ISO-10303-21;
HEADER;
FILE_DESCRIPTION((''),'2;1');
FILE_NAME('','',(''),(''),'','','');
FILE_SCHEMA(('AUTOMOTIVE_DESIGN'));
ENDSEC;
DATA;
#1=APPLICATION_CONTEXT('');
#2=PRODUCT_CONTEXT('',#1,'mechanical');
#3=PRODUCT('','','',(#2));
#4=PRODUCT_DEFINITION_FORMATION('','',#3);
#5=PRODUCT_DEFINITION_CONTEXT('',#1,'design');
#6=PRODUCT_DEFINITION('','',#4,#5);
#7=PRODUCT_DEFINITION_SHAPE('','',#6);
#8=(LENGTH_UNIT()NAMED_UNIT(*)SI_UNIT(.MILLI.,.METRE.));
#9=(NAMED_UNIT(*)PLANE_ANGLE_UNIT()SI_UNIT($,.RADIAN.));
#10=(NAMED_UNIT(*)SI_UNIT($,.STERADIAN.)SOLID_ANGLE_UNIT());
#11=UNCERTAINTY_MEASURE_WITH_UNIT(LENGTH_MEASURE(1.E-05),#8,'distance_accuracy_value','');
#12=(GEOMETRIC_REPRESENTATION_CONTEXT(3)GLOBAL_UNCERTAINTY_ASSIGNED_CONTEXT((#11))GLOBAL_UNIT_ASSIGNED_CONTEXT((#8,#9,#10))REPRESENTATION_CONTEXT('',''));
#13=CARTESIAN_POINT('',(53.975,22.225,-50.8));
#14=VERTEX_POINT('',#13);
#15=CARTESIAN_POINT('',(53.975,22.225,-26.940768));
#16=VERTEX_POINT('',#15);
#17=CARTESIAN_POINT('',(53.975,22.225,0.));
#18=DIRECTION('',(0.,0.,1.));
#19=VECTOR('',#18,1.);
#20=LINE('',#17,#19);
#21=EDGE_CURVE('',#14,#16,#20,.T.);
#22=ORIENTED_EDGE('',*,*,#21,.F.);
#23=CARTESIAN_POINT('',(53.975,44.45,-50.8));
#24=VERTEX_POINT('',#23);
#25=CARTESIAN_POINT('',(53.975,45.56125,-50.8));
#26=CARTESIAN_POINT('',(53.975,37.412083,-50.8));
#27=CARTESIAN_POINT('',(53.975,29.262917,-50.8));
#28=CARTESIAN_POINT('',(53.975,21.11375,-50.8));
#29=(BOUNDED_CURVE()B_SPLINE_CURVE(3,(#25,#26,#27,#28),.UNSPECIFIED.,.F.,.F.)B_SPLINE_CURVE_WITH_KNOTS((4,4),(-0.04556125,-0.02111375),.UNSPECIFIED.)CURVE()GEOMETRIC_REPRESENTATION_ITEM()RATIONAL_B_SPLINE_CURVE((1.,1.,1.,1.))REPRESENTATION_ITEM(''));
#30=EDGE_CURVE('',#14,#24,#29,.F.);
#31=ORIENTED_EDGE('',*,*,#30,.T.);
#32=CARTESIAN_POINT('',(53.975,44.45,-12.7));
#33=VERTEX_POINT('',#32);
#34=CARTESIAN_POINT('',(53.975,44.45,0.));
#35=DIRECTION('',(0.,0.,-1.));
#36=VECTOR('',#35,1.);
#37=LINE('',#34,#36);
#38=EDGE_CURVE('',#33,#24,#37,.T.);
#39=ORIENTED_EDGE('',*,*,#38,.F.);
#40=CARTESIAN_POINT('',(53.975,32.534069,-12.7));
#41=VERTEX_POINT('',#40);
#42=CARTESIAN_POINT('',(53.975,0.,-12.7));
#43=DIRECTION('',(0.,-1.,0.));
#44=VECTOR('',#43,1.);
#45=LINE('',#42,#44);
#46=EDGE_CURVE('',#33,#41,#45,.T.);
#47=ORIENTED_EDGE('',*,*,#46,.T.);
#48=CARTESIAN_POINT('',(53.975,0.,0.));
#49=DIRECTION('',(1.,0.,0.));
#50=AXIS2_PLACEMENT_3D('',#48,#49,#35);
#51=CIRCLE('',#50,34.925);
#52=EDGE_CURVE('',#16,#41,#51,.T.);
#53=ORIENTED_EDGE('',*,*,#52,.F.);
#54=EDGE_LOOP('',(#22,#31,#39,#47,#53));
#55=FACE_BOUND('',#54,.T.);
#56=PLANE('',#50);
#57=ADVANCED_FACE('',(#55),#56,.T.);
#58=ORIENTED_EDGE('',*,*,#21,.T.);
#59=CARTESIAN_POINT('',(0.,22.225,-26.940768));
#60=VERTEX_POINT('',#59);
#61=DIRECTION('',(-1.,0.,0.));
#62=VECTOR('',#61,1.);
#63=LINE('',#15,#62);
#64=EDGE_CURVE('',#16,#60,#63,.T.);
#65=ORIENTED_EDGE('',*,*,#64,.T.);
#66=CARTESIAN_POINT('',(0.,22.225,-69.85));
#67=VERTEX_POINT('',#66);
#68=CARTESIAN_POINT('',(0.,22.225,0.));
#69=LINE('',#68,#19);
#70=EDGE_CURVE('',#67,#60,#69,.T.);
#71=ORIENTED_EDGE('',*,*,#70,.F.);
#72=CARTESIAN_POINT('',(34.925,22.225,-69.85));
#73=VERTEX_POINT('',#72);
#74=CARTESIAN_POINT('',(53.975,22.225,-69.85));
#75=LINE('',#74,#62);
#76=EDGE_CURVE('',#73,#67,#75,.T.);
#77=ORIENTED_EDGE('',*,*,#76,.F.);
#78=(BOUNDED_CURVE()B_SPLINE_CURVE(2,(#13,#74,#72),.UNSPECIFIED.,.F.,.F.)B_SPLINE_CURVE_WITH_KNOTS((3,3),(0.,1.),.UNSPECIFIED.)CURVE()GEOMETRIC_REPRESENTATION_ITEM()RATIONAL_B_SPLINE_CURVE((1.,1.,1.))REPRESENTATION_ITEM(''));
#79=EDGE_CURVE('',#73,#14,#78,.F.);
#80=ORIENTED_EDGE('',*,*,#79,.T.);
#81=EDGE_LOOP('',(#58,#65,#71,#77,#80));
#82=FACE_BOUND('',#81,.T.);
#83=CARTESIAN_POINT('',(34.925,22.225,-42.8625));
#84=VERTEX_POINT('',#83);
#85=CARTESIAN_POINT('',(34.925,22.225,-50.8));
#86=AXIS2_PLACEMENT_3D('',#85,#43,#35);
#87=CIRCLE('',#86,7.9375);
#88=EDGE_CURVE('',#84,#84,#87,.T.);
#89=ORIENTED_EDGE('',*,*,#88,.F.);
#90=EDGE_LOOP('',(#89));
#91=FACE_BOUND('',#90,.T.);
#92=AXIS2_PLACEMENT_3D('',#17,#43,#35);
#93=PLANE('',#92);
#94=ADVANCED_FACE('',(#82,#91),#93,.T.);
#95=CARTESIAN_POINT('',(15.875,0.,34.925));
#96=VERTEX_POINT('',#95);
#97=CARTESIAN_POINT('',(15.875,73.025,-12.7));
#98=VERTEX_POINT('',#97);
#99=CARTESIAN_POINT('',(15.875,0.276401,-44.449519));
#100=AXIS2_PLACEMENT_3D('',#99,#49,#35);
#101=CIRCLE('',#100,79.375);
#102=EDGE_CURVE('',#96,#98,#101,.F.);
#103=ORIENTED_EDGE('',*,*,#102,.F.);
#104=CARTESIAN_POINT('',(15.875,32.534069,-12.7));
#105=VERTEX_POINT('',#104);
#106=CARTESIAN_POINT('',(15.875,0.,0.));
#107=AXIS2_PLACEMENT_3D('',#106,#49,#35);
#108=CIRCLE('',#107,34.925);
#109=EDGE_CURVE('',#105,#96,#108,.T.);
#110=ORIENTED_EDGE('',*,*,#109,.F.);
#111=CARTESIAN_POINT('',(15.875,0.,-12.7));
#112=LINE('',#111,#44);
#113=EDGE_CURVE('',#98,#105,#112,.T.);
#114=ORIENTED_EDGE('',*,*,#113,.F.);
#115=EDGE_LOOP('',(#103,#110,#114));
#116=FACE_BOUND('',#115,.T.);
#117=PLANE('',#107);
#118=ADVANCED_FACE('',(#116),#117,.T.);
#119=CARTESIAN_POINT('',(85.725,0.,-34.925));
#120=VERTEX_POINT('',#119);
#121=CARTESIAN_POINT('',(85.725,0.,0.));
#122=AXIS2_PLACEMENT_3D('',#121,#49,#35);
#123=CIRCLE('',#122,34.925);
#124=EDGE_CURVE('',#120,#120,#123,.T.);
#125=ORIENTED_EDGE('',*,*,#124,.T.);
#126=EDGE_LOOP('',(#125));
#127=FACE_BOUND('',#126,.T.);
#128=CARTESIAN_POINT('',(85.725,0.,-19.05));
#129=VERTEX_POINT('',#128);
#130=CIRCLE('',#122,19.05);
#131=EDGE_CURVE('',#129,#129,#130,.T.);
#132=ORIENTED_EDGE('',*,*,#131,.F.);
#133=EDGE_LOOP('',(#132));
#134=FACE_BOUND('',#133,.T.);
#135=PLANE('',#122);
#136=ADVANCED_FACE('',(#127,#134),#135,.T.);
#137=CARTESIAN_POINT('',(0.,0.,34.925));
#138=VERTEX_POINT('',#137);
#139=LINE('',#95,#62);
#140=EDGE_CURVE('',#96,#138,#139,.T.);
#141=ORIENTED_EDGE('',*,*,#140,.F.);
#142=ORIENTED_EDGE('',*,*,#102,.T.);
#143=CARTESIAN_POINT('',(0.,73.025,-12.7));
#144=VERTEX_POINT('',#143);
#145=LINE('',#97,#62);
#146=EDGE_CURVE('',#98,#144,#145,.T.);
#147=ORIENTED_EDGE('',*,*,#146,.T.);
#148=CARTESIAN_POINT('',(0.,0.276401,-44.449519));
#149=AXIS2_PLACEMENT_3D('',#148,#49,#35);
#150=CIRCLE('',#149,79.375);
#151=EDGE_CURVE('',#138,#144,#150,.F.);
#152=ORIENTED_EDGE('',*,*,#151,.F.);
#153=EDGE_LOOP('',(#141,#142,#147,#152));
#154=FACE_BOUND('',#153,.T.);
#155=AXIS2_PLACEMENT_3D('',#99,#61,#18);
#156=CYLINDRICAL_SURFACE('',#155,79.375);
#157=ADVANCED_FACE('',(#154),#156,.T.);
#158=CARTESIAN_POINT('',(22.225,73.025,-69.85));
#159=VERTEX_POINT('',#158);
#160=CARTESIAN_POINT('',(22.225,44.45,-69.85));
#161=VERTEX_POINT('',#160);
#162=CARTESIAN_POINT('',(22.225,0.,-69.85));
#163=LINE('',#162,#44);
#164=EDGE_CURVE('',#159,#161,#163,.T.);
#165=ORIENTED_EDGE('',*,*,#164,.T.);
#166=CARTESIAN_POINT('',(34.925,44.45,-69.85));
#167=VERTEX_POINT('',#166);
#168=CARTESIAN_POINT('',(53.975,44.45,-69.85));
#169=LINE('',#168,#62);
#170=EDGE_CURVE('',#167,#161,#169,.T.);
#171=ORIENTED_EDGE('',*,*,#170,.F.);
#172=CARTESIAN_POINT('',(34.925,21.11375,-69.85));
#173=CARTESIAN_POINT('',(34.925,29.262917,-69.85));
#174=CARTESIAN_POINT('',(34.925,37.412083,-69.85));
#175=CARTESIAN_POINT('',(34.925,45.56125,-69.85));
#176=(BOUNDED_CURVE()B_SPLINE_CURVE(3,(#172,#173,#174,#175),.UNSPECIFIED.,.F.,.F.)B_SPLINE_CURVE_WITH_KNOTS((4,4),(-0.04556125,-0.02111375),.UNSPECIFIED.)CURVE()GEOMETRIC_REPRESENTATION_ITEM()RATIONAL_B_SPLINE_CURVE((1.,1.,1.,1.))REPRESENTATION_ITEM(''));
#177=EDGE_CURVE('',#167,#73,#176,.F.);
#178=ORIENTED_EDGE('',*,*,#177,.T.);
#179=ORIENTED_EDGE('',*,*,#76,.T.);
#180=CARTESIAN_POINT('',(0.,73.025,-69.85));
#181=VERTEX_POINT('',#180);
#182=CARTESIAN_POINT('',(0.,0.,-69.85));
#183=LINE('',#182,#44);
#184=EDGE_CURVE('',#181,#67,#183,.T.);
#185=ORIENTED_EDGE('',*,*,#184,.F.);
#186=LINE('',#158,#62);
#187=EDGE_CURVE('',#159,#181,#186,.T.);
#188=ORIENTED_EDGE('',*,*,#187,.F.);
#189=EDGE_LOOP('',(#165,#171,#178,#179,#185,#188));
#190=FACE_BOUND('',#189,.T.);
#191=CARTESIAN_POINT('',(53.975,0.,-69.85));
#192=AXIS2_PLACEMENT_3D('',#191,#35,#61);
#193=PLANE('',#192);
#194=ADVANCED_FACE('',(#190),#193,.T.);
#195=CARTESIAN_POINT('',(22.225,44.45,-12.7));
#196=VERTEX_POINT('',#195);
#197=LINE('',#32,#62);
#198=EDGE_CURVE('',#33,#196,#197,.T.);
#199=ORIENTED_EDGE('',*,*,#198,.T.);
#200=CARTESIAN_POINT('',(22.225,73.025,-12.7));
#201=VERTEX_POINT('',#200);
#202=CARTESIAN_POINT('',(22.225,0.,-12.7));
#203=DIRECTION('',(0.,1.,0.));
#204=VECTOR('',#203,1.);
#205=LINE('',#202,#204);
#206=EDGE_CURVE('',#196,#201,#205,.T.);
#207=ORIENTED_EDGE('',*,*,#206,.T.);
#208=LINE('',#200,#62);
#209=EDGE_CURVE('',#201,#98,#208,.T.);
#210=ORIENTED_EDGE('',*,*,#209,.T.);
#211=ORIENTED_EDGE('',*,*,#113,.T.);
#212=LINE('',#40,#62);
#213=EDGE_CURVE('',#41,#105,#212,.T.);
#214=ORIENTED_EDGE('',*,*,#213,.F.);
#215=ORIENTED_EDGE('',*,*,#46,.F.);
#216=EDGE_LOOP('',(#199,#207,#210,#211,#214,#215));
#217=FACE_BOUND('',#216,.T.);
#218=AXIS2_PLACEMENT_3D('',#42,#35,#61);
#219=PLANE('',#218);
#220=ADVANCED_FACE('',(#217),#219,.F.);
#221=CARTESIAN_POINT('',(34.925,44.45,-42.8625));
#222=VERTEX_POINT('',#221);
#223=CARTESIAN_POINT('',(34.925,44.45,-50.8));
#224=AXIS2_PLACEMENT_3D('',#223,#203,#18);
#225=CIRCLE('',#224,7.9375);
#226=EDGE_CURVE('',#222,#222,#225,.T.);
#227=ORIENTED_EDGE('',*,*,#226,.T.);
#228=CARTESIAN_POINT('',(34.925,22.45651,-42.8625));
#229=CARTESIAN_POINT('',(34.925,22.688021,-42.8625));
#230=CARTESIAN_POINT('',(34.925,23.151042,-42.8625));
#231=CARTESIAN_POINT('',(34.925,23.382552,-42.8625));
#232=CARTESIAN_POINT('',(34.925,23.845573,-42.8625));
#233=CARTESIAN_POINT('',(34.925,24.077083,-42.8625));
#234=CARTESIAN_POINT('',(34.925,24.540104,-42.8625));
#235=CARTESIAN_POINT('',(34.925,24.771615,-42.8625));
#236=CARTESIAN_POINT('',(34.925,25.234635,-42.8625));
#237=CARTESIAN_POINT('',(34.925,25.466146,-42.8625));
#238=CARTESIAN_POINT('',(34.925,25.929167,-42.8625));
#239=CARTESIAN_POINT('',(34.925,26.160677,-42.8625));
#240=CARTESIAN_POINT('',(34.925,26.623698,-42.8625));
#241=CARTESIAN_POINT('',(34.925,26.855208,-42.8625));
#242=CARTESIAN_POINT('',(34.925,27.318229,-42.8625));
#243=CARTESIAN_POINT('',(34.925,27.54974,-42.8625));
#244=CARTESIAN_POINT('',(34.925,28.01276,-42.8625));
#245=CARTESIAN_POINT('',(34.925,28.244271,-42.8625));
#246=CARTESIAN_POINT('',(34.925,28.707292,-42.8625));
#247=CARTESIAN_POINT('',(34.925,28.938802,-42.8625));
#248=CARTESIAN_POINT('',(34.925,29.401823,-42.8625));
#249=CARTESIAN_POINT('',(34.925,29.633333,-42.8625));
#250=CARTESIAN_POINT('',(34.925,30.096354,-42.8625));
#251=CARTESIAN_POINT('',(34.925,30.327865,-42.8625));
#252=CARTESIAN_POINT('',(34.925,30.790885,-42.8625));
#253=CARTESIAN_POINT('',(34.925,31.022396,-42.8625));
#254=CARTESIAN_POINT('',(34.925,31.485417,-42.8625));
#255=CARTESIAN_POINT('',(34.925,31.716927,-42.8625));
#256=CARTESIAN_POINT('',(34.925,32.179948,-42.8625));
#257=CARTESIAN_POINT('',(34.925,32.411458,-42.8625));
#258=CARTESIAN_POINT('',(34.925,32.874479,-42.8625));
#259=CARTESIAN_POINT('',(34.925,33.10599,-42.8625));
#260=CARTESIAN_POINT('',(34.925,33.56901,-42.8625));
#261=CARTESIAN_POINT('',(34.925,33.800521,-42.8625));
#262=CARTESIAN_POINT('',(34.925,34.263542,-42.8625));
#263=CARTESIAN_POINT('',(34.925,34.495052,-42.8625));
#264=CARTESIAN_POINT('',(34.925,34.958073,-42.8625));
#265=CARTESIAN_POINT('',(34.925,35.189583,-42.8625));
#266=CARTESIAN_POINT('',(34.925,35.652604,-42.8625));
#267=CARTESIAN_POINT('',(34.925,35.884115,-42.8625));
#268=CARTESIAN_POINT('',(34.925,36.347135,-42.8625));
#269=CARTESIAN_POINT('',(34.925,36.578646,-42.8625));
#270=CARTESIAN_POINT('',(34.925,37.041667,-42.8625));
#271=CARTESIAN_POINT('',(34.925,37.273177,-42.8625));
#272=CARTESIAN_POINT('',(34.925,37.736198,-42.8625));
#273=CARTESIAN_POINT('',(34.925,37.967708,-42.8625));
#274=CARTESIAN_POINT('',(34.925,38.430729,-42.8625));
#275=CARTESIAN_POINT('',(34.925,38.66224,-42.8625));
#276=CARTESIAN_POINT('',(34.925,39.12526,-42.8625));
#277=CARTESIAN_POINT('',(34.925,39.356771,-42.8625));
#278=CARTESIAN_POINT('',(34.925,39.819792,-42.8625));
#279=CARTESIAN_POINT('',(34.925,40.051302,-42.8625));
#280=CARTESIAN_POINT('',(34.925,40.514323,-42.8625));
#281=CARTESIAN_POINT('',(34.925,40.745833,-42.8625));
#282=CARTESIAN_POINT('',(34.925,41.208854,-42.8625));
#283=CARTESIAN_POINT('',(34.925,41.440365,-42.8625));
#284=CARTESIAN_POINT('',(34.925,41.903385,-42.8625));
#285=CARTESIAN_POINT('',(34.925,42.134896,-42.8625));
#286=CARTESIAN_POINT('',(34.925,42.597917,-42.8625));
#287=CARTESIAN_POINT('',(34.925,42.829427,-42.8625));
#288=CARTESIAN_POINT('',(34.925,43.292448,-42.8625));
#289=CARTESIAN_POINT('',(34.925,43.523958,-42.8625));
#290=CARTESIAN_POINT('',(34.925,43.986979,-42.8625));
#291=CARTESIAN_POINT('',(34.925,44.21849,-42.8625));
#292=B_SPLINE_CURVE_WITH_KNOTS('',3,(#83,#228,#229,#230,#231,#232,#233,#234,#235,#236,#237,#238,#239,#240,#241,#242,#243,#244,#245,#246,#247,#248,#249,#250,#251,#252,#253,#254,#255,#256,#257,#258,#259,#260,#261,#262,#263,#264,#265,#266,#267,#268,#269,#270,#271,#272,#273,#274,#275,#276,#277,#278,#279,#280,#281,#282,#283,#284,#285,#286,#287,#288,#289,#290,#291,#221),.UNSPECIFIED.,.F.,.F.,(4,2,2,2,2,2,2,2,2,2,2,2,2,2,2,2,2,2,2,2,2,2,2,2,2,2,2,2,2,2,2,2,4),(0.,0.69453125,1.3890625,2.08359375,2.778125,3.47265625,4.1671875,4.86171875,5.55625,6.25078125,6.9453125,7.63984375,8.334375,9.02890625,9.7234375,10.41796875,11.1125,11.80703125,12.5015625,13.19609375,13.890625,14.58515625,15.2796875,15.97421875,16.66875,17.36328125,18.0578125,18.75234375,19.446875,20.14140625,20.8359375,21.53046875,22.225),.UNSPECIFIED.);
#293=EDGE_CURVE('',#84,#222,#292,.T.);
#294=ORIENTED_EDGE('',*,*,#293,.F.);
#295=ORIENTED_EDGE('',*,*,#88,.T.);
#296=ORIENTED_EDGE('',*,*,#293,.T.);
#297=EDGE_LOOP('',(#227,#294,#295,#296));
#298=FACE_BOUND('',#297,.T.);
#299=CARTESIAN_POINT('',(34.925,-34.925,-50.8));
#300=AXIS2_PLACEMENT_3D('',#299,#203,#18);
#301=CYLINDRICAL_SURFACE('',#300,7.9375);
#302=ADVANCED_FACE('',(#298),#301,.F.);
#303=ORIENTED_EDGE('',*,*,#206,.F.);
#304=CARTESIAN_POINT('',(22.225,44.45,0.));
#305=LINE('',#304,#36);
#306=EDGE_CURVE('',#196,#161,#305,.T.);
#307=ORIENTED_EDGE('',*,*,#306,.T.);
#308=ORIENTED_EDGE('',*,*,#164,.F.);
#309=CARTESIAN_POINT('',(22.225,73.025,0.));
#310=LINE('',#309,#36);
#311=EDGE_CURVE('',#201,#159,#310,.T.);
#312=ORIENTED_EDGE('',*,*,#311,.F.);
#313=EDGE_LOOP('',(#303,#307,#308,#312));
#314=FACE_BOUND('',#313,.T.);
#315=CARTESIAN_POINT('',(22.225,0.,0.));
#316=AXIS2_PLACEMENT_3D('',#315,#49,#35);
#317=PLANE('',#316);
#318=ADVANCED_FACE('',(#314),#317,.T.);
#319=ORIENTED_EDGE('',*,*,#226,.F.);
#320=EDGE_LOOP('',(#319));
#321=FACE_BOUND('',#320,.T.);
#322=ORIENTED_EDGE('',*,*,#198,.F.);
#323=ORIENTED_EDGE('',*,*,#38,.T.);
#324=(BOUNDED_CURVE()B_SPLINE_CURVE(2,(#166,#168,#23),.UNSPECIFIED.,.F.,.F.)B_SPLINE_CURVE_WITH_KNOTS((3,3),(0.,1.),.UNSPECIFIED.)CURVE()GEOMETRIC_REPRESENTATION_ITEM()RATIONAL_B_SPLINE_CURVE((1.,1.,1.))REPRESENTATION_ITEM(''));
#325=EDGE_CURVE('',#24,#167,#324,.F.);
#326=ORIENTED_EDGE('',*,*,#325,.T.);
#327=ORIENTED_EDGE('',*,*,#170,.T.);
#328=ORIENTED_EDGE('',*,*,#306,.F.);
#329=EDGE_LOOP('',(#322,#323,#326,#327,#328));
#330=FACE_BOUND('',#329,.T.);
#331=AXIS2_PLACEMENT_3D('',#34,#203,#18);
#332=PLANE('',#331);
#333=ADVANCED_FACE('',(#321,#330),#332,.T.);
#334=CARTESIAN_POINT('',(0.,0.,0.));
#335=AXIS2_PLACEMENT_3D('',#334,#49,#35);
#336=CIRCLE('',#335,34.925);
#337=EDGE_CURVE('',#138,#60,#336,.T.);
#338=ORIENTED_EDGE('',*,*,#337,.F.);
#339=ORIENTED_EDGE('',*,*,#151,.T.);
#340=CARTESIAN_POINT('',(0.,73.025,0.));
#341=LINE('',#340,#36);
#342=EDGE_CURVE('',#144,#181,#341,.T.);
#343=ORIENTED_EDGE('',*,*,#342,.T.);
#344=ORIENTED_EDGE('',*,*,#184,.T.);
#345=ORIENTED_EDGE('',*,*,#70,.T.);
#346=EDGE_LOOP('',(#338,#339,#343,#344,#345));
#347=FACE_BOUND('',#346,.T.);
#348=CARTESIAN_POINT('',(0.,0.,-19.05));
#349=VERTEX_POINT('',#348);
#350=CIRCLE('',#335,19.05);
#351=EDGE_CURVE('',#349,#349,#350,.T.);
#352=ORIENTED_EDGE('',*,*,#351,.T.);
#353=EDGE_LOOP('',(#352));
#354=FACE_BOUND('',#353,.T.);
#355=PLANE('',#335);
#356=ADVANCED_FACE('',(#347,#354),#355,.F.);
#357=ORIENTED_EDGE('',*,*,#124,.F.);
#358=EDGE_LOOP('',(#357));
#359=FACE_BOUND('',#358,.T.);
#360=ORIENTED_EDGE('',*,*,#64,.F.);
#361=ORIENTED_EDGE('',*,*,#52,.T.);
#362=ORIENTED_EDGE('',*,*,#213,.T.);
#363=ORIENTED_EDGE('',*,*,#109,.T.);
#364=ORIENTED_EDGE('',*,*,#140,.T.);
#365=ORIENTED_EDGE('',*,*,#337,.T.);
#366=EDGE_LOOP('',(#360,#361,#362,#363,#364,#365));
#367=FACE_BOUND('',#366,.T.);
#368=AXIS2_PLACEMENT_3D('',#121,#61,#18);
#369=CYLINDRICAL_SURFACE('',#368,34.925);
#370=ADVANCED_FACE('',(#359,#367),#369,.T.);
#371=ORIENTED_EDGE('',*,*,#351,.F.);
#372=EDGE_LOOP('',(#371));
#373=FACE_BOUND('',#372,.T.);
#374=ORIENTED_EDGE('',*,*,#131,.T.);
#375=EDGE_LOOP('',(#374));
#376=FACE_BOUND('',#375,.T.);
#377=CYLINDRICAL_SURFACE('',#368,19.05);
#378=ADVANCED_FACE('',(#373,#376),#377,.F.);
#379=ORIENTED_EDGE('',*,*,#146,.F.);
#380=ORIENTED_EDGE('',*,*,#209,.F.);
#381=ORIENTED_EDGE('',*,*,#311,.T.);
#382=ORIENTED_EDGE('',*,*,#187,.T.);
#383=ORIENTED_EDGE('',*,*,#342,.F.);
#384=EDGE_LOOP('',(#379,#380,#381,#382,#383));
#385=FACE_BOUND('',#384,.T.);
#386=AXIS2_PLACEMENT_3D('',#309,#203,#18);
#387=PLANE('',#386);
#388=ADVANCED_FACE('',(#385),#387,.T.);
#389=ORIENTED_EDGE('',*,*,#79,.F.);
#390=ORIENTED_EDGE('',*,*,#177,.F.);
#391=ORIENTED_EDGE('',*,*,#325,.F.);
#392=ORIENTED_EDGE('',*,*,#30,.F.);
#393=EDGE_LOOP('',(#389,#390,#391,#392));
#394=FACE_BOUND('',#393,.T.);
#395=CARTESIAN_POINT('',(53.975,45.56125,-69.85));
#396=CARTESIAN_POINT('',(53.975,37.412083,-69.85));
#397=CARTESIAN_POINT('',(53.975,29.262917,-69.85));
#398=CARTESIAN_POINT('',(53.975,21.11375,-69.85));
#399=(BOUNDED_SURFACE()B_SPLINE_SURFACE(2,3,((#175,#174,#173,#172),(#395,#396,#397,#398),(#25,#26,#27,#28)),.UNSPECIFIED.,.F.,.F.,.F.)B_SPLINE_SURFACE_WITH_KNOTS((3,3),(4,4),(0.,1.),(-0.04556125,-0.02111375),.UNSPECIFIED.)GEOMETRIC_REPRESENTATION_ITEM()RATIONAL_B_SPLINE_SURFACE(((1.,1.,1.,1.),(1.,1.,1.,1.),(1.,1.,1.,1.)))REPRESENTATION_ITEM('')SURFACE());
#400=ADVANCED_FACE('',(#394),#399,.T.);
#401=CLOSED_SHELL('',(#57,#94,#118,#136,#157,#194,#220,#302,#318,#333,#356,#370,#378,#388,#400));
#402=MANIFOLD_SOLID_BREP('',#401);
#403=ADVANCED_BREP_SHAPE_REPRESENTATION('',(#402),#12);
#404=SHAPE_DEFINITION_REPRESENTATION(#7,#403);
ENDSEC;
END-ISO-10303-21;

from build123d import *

# Parameters (mm, degrees)
SKETCH1_R           = 34.925
SKETCH1_R_2         = 19.05
BOSS_EXTRUDE1_DEPTH = 85.725
BOSS_EXTRUDE2_DEPTH = 53.975
SKETCH1_4_W         = 57.15
SKETCH1_4_H         = 28.575
BOSS_EXTRUDE3_DEPTH = 22.225
BOSS_EXTRUDE4_DEPTH = 15.875
FILLET1_SIZE        = 19.05
SKETCH2_R           = 7.9375
CUT_EXTRUDE1_DEPTH  = 137.118289601


with BuildPart() as part:
    # Sketch1 → Boss-Extrude1 (new body)
    with BuildSketch(Plane(origin=(0, 0, 0), x_dir=(0, 0, -1), z_dir=(1, 0, 0))):
        Circle(SKETCH1_R)
        Circle(SKETCH1_R_2, mode=Mode.SUBTRACT)
    extrude(amount=BOSS_EXTRUDE1_DEPTH)

    # Sketch1<3> → Boss-Extrude2 (add)
    with BuildSketch(Plane(origin=(0, 0, 0), x_dir=(0, 0, -1), z_dir=(1, 0, 0))):
        with BuildLine():
            Line((69.85, 44.45), (12.7, 44.45))
            Line((12.7, 44.45), (12.7, 32.534068682))
            ThreePointArc((12.7, 32.534068682), (20.479669269, 28.290259306), (26.940768363, 22.225))
            Line((26.940768363, 22.225), (69.85, 22.225))
            Line((69.85, 22.225), (69.85, 44.45))
        make_face()
    extrude(amount=BOSS_EXTRUDE2_DEPTH)

    # Sketch1<4> → Boss-Extrude3 (add)
    with BuildSketch(Plane(origin=(0, 0, 0), x_dir=(0, 0, -1), z_dir=(1, 0, 0))):
        with Locations((41.275, 58.7375)):
            Rectangle(SKETCH1_4_W, SKETCH1_4_H)
    extrude(amount=BOSS_EXTRUDE3_DEPTH)

    # Sketch1<5> → Boss-Extrude4 (add)
    with BuildSketch(Plane(origin=(0, 0, 0), x_dir=(0, 0, -1), z_dir=(1, 0, 0))):
        with BuildLine():
            Line((12.7, 32.534068682), (12.7, 44.45))
            Line((12.7, 44.45), (12.7, 73.025))
            ThreePointArc((12.7, 73.025), (-22.035822369, 43.636405893), (-34.925, 0))
            ThreePointArc((-34.925, 0), (-19.700356913, 28.838369623), (12.7, 32.534068682))
        make_face()
    extrude(amount=BOSS_EXTRUDE4_DEPTH)

    # Fillet1
    # a fillet whose section is not a circle: 19.05 mm, written as the material it takes off along each edge
    with BuildSketch(Plane(origin=(53.975, -25.4, -69.85), x_dir=(0, 0, 1), z_dir=(0, 1, 0))) as fillet1_piece_1:
        with BuildLine():
            Bezier((FILLET1_SIZE, 0), (0, 0), (0, -FILLET1_SIZE), weights=[1, 1, 1])
            Line((0, -FILLET1_SIZE), (0, 0))
            Line((0, 0), (FILLET1_SIZE, 0))
        make_face()
    extrude(amount=117.475, mode=Mode.SUBTRACT)

    # Sketch2 → Cut-Extrude1 (cut, through all)
    with BuildSketch(Plane(origin=(0, 44.45, 0), x_dir=(1, 0, 0), z_dir=(0, 1, 0))):
        with Locations(Location((34.925, 50.8, 0), (0, 0, 270))):
            Circle(SKETCH2_R)
    extrude(amount=-CUT_EXTRUDE1_DEPTH, mode=Mode.SUBTRACT)


solid = part.part
